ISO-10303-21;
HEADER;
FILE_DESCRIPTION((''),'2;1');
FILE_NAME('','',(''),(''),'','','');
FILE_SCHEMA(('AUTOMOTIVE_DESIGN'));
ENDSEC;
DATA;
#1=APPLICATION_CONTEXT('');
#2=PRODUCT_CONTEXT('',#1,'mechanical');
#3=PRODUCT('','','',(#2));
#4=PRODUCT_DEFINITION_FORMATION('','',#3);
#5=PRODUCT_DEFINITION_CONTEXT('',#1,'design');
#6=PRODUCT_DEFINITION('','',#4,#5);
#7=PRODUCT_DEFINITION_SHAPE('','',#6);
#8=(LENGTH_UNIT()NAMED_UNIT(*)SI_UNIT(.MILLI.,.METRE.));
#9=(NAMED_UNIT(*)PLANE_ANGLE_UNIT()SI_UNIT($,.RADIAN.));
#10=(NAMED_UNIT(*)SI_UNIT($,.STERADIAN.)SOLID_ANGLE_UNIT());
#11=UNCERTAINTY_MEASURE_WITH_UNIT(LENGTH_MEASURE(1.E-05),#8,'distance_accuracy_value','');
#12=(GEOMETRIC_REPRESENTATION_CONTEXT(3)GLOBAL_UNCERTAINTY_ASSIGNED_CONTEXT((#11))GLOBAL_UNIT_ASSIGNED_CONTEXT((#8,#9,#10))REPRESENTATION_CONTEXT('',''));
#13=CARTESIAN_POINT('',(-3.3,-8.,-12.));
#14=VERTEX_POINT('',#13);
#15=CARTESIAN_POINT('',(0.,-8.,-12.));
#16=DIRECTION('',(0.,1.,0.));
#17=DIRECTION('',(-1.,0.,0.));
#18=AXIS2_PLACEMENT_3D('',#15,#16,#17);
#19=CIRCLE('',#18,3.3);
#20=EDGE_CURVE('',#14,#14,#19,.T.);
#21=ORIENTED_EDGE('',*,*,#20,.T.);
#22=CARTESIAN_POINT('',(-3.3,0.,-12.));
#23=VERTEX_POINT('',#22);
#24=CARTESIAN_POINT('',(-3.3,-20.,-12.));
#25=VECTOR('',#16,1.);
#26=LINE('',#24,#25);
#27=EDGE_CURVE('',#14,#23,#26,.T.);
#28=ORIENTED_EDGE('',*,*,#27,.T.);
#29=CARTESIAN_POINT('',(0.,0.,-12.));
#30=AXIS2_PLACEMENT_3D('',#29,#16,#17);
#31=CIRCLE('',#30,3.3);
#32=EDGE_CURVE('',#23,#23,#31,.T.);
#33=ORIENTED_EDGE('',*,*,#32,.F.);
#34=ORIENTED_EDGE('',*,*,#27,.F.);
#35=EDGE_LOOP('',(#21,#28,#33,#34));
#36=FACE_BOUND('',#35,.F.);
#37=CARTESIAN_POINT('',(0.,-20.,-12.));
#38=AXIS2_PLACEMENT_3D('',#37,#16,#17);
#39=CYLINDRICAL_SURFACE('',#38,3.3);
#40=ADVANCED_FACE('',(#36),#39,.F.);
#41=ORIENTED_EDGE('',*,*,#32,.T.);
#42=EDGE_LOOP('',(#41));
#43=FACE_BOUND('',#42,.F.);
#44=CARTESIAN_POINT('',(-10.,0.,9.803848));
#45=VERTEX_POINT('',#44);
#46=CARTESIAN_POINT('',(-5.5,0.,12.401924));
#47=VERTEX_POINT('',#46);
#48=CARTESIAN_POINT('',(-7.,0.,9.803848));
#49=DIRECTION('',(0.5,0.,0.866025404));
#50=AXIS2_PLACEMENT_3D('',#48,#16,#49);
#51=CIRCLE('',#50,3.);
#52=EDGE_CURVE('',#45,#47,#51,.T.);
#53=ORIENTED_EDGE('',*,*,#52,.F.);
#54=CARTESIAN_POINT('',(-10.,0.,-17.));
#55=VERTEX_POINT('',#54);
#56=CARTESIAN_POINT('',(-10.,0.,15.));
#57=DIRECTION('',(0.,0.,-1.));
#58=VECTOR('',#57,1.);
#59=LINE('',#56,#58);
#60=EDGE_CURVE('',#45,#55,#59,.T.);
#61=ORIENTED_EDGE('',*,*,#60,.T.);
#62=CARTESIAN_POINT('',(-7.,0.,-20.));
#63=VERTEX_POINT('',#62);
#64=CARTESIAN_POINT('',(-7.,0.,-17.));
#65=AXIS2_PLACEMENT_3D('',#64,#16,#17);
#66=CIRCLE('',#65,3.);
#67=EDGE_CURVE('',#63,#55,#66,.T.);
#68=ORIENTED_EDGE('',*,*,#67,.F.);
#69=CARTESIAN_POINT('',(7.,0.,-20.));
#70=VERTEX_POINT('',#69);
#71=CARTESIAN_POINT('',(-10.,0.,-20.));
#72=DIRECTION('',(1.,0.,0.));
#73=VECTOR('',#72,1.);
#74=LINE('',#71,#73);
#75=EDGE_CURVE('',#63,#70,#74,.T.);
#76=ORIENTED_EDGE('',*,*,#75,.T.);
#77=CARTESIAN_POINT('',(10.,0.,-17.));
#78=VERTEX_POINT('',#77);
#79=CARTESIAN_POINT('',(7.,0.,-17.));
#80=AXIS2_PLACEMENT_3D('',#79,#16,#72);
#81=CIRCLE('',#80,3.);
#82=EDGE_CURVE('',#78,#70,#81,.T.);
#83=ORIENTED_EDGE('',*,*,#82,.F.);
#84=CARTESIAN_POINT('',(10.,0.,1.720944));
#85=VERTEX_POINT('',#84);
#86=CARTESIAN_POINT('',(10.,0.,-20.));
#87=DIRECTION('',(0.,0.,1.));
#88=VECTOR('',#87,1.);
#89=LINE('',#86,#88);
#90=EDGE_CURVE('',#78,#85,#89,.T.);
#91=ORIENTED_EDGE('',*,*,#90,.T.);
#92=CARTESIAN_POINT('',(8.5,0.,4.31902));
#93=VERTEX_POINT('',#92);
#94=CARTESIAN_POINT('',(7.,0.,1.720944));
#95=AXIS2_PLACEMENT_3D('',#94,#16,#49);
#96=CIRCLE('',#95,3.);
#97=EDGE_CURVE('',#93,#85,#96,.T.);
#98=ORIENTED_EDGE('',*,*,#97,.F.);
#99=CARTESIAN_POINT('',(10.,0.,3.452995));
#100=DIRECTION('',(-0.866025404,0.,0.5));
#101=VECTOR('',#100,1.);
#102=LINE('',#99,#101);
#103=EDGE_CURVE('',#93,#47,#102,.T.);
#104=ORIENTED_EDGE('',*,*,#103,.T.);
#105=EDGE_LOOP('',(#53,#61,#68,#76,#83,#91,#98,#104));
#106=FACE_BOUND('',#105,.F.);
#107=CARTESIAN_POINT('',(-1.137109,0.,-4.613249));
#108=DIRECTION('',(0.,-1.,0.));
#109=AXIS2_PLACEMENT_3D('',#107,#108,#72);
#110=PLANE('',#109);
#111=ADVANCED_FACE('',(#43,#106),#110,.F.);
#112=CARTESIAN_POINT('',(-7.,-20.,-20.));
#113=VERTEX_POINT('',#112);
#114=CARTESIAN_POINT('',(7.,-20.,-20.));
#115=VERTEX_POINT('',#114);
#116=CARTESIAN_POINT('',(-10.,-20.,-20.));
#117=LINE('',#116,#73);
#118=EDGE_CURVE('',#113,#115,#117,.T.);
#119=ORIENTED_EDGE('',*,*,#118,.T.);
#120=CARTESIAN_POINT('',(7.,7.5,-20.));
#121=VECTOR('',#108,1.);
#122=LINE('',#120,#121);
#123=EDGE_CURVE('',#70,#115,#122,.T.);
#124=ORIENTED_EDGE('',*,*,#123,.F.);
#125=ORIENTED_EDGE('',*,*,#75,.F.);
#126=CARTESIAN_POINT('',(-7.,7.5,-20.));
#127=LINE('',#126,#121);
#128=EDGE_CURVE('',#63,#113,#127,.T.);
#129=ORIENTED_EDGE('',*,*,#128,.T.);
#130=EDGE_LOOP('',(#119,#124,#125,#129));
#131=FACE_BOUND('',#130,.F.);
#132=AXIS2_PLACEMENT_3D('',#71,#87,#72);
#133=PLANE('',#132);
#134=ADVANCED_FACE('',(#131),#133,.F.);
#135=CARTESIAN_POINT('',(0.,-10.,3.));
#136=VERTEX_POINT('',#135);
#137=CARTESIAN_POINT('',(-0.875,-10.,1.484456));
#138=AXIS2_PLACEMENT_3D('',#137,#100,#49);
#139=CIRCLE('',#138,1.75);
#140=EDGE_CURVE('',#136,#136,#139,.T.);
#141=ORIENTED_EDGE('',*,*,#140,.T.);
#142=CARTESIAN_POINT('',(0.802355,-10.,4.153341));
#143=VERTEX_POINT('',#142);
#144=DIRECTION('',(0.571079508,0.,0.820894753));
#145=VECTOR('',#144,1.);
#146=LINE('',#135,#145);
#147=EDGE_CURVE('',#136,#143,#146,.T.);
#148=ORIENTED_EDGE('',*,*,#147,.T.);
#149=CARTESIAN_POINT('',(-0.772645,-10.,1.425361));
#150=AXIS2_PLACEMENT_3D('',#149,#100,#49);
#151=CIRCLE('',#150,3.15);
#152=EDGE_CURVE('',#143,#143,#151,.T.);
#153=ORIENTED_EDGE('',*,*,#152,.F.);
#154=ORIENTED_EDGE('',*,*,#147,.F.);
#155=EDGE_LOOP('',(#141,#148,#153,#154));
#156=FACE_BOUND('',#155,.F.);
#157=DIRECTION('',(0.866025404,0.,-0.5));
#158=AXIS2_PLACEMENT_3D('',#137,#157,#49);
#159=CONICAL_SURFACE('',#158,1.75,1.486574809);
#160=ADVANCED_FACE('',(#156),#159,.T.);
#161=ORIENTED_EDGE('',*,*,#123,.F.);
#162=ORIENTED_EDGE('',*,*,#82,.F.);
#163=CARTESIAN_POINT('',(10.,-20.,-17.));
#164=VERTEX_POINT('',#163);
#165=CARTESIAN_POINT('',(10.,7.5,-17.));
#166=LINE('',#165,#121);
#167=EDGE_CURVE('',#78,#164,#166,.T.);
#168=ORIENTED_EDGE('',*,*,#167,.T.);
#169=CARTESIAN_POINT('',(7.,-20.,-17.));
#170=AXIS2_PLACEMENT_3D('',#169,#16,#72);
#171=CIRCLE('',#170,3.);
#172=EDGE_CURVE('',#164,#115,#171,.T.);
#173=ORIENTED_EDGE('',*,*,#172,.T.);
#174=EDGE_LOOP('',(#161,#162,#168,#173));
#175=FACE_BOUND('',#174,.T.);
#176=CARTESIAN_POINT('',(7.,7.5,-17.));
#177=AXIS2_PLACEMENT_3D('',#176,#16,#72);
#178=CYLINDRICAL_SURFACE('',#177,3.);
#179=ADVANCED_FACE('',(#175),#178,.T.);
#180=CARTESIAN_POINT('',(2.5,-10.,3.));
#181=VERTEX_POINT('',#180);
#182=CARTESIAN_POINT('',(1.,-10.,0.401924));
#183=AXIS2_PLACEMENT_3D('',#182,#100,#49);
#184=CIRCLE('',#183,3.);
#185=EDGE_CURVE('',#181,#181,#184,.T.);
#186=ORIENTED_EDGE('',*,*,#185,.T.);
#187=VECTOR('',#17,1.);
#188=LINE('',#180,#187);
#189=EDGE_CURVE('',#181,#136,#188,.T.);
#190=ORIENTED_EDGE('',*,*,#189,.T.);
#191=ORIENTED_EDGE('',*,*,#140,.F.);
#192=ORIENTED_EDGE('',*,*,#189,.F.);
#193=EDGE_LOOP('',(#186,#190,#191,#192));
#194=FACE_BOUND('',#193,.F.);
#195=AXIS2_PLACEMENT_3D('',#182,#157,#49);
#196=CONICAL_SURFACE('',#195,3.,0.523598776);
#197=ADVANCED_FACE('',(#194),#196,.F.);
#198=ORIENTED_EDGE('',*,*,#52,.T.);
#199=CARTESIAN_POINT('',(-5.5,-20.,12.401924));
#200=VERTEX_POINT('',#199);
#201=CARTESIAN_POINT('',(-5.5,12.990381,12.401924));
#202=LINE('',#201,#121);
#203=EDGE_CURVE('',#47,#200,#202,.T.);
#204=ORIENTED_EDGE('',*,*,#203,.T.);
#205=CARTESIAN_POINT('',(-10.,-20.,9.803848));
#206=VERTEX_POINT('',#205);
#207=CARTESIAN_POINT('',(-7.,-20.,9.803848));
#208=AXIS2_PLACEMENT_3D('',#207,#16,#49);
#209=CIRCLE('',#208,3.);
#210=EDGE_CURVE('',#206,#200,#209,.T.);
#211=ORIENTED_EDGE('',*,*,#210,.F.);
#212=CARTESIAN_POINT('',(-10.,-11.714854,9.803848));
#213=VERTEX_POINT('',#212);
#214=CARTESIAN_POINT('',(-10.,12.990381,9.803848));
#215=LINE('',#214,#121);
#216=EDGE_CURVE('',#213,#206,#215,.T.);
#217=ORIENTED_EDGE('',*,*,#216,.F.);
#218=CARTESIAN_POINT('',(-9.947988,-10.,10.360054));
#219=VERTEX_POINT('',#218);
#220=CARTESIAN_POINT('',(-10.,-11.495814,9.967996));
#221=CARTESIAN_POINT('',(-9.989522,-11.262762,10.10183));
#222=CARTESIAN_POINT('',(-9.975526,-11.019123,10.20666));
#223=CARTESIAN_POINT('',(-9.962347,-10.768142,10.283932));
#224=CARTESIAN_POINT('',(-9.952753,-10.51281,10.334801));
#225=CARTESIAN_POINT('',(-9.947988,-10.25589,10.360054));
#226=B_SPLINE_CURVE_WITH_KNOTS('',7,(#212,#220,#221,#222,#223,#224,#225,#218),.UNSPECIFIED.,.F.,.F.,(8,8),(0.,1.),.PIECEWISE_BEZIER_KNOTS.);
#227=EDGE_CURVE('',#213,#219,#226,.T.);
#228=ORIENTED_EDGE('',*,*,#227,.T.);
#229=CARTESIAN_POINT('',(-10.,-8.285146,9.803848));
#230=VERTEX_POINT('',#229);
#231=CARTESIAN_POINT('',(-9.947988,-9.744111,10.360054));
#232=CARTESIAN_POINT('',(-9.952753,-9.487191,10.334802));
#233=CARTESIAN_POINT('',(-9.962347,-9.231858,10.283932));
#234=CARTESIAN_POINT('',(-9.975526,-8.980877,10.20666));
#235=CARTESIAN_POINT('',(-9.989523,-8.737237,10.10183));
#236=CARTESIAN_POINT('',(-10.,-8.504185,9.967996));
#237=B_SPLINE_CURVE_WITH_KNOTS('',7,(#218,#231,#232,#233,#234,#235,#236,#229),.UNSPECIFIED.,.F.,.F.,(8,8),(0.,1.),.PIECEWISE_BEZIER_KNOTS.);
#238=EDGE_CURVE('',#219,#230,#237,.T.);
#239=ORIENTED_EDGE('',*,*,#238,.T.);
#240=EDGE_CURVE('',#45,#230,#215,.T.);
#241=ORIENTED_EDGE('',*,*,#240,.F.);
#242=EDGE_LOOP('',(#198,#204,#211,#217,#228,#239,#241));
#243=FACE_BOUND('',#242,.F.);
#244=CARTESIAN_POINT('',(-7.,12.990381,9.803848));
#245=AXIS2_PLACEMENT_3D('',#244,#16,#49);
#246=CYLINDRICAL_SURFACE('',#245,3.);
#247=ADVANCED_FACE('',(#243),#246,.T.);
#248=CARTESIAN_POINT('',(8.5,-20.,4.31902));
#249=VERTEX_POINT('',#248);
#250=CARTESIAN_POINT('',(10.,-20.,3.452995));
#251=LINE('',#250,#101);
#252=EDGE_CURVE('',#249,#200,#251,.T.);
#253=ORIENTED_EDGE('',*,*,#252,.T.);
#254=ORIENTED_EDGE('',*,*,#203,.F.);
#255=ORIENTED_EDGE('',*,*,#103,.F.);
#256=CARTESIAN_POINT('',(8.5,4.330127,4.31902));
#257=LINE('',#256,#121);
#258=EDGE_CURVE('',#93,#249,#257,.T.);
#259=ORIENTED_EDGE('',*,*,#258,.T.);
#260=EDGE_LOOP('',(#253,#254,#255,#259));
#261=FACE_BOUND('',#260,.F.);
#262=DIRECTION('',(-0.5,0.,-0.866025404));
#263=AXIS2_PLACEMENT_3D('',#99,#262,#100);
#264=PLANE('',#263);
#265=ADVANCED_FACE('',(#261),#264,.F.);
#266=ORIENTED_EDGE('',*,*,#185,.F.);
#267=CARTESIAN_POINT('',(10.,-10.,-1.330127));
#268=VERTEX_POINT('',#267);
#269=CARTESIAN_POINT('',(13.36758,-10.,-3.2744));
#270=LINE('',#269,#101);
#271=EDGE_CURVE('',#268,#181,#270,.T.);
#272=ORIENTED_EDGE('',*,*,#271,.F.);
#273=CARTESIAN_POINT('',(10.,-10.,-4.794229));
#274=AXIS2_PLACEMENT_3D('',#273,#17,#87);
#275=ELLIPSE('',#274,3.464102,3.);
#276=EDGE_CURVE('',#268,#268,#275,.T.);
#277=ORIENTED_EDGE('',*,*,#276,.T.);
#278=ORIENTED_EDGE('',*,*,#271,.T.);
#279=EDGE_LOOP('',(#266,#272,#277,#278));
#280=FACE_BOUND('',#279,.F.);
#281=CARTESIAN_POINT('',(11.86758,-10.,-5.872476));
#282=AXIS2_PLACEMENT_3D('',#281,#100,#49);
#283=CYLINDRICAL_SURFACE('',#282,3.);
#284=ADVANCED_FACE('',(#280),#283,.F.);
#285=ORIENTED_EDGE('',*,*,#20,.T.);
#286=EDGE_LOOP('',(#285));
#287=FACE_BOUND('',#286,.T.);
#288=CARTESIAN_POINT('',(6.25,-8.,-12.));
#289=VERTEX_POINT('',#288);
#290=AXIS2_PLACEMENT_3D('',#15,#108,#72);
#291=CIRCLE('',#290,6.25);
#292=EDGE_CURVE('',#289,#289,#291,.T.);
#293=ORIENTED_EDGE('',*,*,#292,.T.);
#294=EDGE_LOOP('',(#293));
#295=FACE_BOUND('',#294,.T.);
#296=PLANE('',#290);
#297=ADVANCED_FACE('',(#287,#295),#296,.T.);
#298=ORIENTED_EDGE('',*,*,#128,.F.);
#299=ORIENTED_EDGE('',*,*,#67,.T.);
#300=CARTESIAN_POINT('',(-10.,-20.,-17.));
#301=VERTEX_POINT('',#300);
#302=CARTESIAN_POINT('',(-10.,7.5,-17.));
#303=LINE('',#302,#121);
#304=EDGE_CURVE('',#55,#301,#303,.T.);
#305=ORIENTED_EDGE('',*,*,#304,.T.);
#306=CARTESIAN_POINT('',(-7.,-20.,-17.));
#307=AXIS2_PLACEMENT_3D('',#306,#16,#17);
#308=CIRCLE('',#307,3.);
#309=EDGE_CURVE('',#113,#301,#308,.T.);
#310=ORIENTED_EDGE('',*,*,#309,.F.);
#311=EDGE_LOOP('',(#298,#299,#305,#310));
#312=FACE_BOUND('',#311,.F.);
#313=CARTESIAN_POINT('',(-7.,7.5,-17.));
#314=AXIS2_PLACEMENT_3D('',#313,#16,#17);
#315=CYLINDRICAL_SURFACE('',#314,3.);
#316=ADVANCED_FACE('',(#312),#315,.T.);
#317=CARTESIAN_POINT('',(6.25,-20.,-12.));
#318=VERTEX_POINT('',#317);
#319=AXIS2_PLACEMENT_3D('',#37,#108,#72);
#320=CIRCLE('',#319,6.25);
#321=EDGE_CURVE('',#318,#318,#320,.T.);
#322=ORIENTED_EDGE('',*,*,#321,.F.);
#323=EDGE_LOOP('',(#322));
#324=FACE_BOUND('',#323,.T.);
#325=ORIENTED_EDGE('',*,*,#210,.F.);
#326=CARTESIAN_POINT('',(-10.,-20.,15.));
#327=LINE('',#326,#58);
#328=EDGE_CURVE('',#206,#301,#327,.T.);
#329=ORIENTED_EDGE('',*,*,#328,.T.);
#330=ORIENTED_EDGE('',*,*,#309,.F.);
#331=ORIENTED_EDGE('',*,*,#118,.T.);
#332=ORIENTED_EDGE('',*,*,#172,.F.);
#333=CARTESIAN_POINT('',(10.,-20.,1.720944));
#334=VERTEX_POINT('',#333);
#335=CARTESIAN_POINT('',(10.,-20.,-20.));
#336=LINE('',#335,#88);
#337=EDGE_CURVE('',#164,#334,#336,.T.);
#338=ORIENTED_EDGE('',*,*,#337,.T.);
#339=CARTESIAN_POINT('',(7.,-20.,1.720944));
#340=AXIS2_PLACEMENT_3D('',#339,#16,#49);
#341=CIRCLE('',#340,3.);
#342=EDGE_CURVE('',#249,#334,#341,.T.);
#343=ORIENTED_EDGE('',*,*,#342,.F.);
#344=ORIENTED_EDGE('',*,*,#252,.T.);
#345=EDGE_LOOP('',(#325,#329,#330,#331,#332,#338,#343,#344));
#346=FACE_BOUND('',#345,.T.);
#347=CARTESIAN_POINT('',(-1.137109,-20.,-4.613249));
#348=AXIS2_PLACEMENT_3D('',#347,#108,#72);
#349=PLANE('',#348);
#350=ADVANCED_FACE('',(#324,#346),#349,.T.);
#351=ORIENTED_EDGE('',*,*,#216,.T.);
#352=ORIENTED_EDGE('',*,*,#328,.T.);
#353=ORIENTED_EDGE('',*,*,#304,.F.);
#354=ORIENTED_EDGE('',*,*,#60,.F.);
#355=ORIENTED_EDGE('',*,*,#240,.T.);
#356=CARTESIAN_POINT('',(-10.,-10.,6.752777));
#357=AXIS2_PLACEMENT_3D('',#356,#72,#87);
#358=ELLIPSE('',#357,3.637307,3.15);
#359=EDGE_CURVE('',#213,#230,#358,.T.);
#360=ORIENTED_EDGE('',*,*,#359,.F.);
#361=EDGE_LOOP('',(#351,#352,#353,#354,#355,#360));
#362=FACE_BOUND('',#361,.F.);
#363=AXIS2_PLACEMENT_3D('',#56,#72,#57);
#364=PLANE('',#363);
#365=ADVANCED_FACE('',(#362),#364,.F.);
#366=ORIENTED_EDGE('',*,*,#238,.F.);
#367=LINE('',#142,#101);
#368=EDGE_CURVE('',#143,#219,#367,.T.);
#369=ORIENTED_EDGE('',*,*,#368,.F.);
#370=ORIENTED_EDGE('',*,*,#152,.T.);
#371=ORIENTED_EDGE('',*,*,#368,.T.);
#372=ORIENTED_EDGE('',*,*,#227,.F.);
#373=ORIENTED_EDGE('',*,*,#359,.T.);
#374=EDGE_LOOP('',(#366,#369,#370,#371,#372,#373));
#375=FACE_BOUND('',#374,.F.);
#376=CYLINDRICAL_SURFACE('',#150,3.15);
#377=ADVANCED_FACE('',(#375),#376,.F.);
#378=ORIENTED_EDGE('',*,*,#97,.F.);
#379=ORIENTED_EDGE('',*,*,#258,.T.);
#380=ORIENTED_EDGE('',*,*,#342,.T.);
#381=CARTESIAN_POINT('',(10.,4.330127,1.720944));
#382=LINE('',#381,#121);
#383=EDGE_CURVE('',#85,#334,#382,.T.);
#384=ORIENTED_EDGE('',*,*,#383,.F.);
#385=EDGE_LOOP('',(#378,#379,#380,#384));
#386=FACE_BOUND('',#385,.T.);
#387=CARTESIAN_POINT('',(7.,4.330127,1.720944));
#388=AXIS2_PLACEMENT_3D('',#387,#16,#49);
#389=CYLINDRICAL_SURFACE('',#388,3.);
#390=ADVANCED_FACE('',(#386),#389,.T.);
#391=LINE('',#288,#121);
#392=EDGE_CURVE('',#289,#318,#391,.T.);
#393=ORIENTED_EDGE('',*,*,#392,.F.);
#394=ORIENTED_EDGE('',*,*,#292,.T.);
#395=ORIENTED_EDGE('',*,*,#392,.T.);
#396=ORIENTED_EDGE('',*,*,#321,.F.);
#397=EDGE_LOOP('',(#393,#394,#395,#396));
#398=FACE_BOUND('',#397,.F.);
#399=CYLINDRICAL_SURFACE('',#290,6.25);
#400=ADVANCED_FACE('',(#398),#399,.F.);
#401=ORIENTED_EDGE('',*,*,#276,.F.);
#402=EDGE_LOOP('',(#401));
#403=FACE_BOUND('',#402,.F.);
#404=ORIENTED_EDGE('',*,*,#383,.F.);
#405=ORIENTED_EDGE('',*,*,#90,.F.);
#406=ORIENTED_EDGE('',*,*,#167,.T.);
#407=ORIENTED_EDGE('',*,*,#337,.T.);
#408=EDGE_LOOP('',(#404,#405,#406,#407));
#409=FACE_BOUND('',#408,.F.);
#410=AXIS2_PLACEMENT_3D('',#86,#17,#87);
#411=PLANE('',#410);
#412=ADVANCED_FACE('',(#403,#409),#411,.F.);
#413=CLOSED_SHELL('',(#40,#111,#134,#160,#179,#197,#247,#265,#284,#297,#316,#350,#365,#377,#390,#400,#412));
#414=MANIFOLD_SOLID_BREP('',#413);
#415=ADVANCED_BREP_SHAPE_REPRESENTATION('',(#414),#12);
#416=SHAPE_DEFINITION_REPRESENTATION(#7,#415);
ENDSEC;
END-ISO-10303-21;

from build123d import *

# Parameters (mm, degrees)
F1_DEPTH       = 20
F5_D           = 6.6
F5_CBORE_D     = 12.5
F5_CBORE_DEPTH = 12
F7_T1_DEPTH    = 45.9807621135
F7_T3_DEPTH    = 28.6602540378
F7_T5_DEPTH    = 35


# Not quite as in the source:
# - a fillet or chamfer that OpenCascade refuses, or shapes differently, is made with other operations: its cross-section is extruded or revolved along the edge and cut away or added


with BuildPart() as f1:
    # F0 (on Front) → F1 (new body)
    with BuildSketch(Plane.XZ):
        Polygon((-10, -20), (10, -20), (10, 3.4529946162), (-10, 15), align=None)
    extrude(amount=F1_DEPTH)

    # F5 (through all)
    with Locations(Plane.XZ.offset(20)):
        with Locations((0, -12)):
            CounterBoreHole(F5_D / 2, F5_CBORE_D / 2, F5_CBORE_DEPTH)

    # F3 (on offset) → F6 (revolve, cut)
    with BuildSketch(Plane.XZ.offset(10)):
        Polygon((-10.3968404344, 10.6191993773), (-10.3968404344, 6.9818926814), (13.3675798804, -6.7385017846), (13.3675798804, -3.2744001694), (2.5, 3), (0, 3), (0.8023552889, 4.1533407117), align=None)
    revolve(axis=Axis((1.485369723, -10, 0.1216954484), (-0.8660254038, 0, 0.5)), mode=Mode.SUBTRACT)

    # F7: fillet of radius 3 on 4 edges, made by hand

    # F7_s2 → F7_t1 (cut)
    with BuildSketch(Plane.XZ.offset(-12.9903810568)):
        with BuildLine():
            ThreePointArc((-5.5, 12.4019237886), (-8.5, 12.4019237886), (-10, 9.8038475773))
            Line((-10, 9.8038475773), (-10, 15))
            Line((-10, 15), (-5.5, 12.4019237886))
        make_face()
    extrude(amount=F7_T1_DEPTH, mode=Mode.SUBTRACT)

    # F7_s4 → F7_t3 (cut)
    with BuildSketch(Plane.XZ.offset(-4.3301270189)):
        with BuildLine():
            ThreePointArc((8.5, 4.31902002), (9.5980762114, 3.2209438086), (10, 1.7209438086))
            Line((10, 1.7209438086), (10, 3.4529946162))
            Line((10, 3.4529946162), (8.5, 4.31902002))
        make_face()
    extrude(amount=F7_T3_DEPTH, mode=Mode.SUBTRACT)

    # F7_s6 → F7_t5 (cut)
    with BuildSketch(Plane.XZ.offset(-7.5)):
        with BuildLine():
            ThreePointArc((10, -17), (9.1213203436, -19.1213203436), (7, -20))
            Line((7, -20), (10, -20))
            Line((10, -20), (10, -17))
        make_face()
        with BuildLine():
            ThreePointArc((-10, -17), (-9.1213203436, -19.1213203436), (-7, -20))
            Line((-7, -20), (-10, -20))
            Line((-10, -20), (-10, -17))
        make_face()
    extrude(amount=F7_T5_DEPTH, mode=Mode.SUBTRACT)


solid = f1.part
